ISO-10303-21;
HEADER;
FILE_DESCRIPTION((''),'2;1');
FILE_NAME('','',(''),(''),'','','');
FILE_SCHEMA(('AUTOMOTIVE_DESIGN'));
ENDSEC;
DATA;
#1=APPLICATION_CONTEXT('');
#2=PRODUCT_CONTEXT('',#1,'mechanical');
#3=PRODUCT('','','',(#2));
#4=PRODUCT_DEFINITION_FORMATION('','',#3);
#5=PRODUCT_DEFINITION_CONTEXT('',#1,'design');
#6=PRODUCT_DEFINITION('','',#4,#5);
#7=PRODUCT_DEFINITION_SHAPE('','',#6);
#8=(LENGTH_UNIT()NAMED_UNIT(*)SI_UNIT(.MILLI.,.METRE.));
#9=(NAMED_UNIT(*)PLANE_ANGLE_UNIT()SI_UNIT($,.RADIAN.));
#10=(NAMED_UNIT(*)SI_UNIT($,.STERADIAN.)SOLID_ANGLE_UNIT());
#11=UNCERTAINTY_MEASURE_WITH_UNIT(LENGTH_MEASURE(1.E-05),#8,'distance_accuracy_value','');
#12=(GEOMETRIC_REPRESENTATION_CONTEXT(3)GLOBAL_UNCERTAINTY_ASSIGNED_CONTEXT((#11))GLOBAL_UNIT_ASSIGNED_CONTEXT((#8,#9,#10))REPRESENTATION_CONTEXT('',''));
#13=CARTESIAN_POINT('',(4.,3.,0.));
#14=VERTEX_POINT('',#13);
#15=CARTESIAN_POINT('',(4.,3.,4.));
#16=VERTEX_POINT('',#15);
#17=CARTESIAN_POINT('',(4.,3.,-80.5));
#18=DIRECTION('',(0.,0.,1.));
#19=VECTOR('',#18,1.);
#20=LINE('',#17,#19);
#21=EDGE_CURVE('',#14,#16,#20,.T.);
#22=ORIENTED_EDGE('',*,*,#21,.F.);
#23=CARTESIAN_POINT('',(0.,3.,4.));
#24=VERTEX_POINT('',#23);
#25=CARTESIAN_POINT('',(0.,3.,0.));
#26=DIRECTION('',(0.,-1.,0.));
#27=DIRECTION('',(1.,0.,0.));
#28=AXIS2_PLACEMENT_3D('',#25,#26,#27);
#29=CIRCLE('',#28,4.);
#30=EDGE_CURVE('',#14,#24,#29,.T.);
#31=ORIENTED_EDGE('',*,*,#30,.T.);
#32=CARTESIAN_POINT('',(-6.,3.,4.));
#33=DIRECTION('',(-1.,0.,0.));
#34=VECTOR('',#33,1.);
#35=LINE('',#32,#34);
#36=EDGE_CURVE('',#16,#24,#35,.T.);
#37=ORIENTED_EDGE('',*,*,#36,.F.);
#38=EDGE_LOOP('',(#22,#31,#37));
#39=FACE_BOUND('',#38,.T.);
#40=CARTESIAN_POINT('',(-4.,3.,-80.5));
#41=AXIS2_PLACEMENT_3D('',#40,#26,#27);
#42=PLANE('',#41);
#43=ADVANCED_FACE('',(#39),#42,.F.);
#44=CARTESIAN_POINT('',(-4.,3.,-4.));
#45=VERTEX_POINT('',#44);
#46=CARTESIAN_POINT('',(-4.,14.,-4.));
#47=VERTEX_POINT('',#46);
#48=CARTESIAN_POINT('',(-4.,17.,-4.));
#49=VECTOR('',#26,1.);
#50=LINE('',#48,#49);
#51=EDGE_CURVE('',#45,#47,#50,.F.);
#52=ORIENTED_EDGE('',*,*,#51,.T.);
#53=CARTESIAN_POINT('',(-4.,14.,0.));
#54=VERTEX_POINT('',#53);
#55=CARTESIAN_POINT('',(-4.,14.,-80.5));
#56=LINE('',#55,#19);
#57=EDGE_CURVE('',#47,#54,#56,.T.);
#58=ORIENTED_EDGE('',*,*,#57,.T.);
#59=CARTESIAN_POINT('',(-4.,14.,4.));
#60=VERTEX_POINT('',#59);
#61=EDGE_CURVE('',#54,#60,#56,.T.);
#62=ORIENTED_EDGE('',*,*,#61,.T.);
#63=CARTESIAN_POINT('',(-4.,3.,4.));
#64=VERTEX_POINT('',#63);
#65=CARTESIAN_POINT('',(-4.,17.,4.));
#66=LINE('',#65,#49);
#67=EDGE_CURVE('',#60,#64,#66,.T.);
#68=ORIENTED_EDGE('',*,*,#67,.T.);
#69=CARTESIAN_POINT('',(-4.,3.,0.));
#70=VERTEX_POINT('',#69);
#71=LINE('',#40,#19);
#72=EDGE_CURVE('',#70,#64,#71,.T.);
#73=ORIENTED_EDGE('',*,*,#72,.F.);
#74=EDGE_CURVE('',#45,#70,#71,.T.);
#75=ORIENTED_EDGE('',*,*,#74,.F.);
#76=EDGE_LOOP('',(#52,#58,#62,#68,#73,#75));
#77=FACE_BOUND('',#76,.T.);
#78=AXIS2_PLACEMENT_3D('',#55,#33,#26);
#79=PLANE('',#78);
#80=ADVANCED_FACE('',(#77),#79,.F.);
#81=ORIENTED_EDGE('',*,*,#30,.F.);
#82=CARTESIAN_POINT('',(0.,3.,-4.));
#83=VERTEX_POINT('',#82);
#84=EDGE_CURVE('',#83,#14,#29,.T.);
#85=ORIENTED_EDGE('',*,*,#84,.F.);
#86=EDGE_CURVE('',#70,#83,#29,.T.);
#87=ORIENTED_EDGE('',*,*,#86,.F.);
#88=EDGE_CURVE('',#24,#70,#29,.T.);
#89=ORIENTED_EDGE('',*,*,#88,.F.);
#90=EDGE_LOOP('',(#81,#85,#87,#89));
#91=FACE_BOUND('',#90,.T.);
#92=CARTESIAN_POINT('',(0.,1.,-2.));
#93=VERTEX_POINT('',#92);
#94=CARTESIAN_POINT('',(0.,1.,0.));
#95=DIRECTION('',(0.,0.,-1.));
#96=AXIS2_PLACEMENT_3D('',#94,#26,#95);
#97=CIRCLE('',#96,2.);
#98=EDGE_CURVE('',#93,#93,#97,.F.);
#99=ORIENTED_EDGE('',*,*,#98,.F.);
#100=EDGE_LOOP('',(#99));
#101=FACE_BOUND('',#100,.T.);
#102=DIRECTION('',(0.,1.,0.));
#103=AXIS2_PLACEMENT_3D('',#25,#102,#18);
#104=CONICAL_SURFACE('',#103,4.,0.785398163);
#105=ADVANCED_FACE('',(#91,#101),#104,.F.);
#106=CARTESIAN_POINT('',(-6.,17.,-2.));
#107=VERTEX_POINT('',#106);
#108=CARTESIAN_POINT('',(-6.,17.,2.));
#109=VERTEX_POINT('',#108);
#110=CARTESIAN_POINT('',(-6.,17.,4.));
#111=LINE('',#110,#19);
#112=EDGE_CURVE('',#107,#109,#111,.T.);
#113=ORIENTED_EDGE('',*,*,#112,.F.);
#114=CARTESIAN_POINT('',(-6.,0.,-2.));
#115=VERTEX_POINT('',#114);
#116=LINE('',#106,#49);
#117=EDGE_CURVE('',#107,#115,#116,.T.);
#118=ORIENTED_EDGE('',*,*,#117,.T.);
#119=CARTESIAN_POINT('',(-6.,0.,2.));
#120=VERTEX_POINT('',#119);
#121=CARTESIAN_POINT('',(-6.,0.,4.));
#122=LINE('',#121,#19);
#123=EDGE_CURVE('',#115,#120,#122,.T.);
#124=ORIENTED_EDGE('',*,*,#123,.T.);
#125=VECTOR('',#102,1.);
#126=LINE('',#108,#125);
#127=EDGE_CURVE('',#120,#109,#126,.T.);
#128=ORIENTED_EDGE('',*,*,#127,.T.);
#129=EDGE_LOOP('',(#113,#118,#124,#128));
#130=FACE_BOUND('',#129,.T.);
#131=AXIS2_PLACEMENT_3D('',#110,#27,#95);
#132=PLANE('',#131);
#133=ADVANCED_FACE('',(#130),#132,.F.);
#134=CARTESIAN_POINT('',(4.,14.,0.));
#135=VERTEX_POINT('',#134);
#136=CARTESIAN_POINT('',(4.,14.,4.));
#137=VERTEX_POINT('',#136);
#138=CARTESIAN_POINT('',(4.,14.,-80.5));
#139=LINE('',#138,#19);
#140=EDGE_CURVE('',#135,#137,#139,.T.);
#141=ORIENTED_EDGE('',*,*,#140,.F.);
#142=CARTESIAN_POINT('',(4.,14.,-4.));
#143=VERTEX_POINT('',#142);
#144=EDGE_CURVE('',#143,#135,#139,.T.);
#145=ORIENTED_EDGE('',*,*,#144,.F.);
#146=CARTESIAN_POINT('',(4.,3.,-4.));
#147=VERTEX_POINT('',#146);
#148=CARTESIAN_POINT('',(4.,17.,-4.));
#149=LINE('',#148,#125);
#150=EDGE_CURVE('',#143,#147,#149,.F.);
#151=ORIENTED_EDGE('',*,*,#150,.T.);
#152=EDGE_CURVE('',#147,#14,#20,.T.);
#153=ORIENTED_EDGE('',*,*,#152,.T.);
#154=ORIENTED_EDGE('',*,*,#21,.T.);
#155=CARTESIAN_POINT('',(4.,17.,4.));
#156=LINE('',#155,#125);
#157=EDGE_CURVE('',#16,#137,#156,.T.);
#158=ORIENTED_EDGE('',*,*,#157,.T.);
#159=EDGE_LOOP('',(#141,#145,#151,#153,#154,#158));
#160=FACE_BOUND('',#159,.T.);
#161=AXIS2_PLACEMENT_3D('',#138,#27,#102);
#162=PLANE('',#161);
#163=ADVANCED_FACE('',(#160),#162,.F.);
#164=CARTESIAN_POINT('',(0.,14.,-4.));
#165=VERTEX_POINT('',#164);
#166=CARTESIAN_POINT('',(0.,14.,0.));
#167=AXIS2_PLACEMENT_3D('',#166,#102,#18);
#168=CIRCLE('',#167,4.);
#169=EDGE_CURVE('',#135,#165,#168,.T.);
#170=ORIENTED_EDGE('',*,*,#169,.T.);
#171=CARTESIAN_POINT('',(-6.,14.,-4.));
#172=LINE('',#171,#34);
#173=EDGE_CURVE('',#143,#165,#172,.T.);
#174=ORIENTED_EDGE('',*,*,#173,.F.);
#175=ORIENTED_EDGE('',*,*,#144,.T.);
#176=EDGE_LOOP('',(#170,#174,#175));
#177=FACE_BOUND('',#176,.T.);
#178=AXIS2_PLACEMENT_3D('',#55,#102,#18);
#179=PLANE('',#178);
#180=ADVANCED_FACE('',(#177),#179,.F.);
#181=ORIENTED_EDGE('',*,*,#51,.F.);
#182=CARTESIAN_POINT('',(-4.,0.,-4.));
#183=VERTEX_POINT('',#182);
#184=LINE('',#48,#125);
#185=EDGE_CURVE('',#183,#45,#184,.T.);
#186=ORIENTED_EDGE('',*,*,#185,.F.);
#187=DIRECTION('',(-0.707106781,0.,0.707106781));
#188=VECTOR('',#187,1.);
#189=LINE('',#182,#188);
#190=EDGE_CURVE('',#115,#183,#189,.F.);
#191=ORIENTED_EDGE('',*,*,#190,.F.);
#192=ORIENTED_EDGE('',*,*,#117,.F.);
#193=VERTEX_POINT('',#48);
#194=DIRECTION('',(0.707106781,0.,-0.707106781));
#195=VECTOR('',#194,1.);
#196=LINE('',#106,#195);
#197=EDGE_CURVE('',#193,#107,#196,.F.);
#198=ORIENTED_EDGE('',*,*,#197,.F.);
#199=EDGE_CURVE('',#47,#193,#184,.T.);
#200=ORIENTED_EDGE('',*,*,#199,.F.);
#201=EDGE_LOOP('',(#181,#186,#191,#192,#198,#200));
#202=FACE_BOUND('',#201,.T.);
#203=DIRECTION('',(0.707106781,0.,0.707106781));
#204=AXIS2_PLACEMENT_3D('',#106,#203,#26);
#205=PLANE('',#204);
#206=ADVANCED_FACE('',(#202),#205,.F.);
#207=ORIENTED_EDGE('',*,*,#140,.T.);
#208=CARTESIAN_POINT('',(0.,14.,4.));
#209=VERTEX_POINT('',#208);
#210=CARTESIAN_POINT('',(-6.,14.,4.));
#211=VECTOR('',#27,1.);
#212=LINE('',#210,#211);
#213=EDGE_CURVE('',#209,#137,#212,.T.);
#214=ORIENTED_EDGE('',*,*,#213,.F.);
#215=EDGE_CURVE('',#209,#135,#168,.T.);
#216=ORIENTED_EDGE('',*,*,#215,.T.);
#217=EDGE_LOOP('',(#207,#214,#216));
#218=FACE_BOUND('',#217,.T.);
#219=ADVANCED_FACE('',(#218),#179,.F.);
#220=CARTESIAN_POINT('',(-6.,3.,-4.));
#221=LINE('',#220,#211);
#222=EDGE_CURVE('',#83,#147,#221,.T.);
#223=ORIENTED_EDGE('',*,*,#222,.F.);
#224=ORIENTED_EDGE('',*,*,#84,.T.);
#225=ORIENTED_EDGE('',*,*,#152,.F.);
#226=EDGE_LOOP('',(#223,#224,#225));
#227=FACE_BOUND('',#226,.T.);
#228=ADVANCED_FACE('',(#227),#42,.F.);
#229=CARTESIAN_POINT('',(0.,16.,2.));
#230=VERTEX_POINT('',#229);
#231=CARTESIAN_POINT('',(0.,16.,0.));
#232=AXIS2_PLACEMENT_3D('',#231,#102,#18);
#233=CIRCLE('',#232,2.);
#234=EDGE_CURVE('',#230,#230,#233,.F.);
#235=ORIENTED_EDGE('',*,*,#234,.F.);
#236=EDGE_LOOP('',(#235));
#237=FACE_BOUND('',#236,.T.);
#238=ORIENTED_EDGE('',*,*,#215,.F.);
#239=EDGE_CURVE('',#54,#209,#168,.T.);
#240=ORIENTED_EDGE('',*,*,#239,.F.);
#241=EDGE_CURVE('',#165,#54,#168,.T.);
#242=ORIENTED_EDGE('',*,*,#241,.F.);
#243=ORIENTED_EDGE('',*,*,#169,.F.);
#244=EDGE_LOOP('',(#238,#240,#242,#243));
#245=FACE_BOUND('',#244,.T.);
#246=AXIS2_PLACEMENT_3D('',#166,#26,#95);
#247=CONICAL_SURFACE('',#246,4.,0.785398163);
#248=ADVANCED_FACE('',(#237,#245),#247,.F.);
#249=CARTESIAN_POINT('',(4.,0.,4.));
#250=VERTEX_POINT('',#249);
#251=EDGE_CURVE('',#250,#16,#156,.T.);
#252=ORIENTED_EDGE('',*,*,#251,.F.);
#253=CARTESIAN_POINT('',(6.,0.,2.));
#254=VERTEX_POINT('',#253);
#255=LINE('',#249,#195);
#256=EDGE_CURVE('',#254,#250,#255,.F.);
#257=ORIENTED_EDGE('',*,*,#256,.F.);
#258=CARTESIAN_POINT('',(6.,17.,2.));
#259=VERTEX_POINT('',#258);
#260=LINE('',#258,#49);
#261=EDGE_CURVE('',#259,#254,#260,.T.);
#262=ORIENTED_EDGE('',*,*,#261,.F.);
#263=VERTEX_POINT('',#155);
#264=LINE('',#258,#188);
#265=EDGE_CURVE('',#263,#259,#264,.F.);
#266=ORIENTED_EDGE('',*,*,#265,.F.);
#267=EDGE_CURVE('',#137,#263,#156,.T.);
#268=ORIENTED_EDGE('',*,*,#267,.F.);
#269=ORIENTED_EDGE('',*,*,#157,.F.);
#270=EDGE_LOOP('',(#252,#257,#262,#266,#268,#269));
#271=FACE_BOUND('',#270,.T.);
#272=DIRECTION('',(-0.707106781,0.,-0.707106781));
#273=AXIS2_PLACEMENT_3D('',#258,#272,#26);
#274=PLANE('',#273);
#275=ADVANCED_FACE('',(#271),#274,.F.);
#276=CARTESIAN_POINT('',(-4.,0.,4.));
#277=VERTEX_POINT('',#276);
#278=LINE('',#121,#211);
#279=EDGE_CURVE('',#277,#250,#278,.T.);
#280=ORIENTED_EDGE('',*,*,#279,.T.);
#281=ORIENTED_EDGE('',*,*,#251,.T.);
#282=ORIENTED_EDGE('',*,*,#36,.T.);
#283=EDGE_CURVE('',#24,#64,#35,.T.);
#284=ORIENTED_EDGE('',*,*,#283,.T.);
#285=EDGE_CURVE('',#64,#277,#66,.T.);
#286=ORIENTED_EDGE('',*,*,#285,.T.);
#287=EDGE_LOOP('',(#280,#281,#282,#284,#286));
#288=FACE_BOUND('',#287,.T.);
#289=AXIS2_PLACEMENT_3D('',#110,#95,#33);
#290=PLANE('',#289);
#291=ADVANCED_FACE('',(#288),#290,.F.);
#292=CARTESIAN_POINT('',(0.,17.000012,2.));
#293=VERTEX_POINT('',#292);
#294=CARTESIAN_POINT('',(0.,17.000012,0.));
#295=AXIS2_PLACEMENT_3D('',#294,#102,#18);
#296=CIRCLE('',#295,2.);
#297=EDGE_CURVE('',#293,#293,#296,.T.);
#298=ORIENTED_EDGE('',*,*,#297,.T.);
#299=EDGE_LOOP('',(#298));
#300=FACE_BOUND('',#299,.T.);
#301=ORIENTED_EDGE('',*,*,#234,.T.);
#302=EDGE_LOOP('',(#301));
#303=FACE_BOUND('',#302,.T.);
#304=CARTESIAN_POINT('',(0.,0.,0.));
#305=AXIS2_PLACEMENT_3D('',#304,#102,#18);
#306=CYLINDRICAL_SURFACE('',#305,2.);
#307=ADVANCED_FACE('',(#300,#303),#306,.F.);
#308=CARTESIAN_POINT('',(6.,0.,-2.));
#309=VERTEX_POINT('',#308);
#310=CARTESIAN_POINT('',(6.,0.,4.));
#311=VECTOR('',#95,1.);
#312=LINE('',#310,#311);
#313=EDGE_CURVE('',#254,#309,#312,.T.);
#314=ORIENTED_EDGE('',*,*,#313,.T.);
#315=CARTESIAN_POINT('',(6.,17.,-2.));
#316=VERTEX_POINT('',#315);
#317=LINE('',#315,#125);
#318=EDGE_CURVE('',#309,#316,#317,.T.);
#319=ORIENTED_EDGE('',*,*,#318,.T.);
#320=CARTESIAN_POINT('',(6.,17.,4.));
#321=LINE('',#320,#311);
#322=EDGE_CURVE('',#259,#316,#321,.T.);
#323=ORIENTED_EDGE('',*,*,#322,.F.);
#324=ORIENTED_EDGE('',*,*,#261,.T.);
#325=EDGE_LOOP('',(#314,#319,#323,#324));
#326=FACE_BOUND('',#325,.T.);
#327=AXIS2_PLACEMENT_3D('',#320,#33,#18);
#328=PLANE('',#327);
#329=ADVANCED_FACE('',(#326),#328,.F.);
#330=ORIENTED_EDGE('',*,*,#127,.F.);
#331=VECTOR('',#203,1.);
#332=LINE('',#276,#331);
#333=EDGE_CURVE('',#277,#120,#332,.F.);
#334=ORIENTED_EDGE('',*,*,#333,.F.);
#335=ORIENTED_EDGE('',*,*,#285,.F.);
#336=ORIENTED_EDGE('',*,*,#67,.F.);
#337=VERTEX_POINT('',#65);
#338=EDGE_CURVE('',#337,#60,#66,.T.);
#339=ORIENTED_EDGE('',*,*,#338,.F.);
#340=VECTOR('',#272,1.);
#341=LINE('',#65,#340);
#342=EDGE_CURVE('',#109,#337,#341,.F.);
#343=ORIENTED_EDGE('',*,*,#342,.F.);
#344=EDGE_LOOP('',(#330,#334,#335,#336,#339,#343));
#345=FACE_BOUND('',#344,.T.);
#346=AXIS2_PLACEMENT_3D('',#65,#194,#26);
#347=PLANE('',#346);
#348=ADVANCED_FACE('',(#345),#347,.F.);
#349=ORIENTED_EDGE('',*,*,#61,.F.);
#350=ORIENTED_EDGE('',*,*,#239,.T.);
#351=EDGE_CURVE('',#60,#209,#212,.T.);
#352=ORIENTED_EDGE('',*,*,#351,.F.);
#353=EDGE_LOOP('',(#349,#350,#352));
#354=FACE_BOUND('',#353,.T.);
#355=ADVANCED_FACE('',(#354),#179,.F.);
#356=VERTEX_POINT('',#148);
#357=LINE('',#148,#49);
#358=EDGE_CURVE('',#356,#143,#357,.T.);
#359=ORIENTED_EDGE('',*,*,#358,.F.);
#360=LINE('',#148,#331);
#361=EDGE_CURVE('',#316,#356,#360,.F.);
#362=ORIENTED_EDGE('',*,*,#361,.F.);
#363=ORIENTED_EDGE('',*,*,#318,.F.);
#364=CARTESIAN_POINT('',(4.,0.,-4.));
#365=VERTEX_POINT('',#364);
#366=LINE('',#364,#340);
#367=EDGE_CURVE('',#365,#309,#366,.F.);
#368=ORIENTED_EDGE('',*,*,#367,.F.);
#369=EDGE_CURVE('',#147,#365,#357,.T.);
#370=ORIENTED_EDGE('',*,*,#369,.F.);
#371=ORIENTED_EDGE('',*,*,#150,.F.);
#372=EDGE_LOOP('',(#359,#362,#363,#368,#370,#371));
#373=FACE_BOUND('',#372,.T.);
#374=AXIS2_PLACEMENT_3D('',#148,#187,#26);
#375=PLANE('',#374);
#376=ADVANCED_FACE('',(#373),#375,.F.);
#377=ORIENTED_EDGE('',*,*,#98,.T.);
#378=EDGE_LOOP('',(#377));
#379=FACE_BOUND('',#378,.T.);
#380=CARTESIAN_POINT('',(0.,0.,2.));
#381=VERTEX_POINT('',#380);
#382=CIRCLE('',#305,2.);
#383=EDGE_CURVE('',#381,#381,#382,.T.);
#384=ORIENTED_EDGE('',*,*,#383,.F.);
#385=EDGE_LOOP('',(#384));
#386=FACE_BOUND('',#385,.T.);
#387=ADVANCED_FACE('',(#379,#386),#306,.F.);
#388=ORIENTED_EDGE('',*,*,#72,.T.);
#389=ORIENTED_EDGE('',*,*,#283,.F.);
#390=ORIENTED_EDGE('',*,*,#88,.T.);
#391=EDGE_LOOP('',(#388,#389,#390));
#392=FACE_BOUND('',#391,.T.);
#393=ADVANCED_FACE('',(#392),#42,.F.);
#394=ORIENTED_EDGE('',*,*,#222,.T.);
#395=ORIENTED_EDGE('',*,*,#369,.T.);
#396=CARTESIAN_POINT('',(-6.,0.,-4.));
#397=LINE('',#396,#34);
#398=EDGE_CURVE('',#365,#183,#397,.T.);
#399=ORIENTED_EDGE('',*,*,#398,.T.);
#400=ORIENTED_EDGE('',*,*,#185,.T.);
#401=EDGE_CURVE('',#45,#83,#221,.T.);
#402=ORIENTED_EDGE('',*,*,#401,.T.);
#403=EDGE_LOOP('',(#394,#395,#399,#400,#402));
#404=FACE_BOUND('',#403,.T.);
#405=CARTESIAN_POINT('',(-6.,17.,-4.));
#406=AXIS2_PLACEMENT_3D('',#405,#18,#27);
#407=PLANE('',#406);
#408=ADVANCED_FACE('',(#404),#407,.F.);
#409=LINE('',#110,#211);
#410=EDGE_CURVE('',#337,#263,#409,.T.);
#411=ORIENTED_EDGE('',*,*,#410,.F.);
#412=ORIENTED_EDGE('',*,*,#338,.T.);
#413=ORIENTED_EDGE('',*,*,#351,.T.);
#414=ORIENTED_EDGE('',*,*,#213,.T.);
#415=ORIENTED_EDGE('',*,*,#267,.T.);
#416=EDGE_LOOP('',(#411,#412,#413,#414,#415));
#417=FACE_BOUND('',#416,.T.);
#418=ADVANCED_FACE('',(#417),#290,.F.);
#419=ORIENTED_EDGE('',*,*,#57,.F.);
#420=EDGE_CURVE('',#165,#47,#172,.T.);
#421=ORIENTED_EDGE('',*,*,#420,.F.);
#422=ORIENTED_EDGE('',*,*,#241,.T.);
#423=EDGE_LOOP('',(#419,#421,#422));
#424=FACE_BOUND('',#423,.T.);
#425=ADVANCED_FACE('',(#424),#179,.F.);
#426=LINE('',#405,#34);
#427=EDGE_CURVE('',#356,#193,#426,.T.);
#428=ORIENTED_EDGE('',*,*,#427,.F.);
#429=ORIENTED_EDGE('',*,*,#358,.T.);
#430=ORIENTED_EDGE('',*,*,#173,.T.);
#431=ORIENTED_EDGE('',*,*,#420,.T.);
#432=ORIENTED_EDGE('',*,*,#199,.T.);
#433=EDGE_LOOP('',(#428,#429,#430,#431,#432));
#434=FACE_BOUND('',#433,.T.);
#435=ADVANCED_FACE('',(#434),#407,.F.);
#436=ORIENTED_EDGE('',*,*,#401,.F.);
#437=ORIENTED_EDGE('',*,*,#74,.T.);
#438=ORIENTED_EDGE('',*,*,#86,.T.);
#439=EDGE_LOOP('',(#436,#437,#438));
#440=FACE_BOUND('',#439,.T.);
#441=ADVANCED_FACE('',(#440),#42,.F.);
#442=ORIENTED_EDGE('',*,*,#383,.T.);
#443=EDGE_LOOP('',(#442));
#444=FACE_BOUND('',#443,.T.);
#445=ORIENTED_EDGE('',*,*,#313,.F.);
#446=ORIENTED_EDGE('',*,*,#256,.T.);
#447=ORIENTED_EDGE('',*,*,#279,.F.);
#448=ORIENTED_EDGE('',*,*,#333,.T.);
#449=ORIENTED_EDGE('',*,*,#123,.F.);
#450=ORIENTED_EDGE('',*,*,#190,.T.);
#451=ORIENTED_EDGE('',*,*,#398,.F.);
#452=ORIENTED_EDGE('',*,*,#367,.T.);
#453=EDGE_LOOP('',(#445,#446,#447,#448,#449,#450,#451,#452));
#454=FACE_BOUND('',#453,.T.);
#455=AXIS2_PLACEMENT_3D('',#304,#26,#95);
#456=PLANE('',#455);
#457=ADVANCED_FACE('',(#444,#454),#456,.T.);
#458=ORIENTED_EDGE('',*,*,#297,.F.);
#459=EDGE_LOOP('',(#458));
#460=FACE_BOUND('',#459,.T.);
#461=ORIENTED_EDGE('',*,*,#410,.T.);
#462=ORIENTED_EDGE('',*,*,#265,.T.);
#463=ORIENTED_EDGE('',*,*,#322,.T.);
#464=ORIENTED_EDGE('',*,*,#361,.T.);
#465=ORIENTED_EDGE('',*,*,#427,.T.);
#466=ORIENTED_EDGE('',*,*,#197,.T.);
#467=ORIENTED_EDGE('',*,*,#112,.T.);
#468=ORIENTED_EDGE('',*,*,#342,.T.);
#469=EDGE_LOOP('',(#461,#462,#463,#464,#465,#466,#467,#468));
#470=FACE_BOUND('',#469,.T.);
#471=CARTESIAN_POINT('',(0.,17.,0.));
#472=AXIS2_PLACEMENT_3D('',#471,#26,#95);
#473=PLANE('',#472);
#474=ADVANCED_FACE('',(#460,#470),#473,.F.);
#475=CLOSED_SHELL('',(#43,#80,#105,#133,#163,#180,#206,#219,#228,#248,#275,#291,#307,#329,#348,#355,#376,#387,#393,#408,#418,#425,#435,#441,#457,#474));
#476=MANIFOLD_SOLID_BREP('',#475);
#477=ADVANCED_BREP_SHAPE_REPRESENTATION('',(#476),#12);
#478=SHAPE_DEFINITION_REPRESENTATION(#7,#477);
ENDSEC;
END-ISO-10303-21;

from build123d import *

# Parameters (mm, degrees)
SKETCH_1_W               = 12
SKETCH_1_H               = 8
EXTRUDE_1_DEPTH          = 17
CHAMFER_1_SIZE           = 2
SKETCH_3_W               = 8
SKETCH_3_H               = 11
CUT_EXTRUDE_1_DEPTH      = 84.5
CUT_EXTRUDE_2_DEPTH      = 19.466185313
CUT_EXTRUDE_2_DEPTH_BACK = 19.466185313
SKETCH_4_R               = 2
CHAMFER_2_SIZE           = 2


with BuildPart() as part:
    # 草图1 → 凸台-拉伸1 (new body)
    with BuildSketch(Plane(origin=(0, 0, 0), x_dir=(1, 0, 0), z_dir=(0, 1, 0))):
        Rectangle(SKETCH_1_W, SKETCH_1_H)
    extrude(amount=EXTRUDE_1_DEPTH)

    # 倒角1
    chamfer_1_edges = [part.edges().sort_by_distance(p)[0] for p in [
        (6, 8.5, 4),
        (-6, 8.5, 4),
        (-6, 8.5, -4),
        (6, 8.5, -4),
    ]]
    chamfer(chamfer_1_edges, length=CHAMFER_1_SIZE)

    # 草图3 → 切除-拉伸1 (cut, symmetric)
    with BuildSketch(Plane.XY.offset(4)):
        with Locations((0, 8.5)):
            Rectangle(SKETCH_3_W, SKETCH_3_H)
    extrude(amount=CUT_EXTRUDE_1_DEPTH, both=True, mode=Mode.SUBTRACT)

    # 草图4 → 切除-拉伸2 (cut, two sides: drawn at the far end of the back side and taken through both)
    with BuildSketch(Plane(origin=(0, 17, 0), x_dir=(1, 0, 0), z_dir=(0, 1, 0)).offset(-CUT_EXTRUDE_2_DEPTH_BACK)):
        with Locations(Location((0, 0, 0), (0, 0, 270))):
            Circle(SKETCH_4_R)
    extrude(amount=CUT_EXTRUDE_2_DEPTH + CUT_EXTRUDE_2_DEPTH_BACK, mode=Mode.SUBTRACT)

    # 倒角2
    chamfer_2_edges = [part.edges().sort_by_distance(p)[0] for p in [
        (0, 3, -2),
        (0, 14, -2),
    ]]
    chamfer(chamfer_2_edges, length=CHAMFER_2_SIZE - 0.0001)  # a hair under: the kernel refuses the full size


solid = part.part
